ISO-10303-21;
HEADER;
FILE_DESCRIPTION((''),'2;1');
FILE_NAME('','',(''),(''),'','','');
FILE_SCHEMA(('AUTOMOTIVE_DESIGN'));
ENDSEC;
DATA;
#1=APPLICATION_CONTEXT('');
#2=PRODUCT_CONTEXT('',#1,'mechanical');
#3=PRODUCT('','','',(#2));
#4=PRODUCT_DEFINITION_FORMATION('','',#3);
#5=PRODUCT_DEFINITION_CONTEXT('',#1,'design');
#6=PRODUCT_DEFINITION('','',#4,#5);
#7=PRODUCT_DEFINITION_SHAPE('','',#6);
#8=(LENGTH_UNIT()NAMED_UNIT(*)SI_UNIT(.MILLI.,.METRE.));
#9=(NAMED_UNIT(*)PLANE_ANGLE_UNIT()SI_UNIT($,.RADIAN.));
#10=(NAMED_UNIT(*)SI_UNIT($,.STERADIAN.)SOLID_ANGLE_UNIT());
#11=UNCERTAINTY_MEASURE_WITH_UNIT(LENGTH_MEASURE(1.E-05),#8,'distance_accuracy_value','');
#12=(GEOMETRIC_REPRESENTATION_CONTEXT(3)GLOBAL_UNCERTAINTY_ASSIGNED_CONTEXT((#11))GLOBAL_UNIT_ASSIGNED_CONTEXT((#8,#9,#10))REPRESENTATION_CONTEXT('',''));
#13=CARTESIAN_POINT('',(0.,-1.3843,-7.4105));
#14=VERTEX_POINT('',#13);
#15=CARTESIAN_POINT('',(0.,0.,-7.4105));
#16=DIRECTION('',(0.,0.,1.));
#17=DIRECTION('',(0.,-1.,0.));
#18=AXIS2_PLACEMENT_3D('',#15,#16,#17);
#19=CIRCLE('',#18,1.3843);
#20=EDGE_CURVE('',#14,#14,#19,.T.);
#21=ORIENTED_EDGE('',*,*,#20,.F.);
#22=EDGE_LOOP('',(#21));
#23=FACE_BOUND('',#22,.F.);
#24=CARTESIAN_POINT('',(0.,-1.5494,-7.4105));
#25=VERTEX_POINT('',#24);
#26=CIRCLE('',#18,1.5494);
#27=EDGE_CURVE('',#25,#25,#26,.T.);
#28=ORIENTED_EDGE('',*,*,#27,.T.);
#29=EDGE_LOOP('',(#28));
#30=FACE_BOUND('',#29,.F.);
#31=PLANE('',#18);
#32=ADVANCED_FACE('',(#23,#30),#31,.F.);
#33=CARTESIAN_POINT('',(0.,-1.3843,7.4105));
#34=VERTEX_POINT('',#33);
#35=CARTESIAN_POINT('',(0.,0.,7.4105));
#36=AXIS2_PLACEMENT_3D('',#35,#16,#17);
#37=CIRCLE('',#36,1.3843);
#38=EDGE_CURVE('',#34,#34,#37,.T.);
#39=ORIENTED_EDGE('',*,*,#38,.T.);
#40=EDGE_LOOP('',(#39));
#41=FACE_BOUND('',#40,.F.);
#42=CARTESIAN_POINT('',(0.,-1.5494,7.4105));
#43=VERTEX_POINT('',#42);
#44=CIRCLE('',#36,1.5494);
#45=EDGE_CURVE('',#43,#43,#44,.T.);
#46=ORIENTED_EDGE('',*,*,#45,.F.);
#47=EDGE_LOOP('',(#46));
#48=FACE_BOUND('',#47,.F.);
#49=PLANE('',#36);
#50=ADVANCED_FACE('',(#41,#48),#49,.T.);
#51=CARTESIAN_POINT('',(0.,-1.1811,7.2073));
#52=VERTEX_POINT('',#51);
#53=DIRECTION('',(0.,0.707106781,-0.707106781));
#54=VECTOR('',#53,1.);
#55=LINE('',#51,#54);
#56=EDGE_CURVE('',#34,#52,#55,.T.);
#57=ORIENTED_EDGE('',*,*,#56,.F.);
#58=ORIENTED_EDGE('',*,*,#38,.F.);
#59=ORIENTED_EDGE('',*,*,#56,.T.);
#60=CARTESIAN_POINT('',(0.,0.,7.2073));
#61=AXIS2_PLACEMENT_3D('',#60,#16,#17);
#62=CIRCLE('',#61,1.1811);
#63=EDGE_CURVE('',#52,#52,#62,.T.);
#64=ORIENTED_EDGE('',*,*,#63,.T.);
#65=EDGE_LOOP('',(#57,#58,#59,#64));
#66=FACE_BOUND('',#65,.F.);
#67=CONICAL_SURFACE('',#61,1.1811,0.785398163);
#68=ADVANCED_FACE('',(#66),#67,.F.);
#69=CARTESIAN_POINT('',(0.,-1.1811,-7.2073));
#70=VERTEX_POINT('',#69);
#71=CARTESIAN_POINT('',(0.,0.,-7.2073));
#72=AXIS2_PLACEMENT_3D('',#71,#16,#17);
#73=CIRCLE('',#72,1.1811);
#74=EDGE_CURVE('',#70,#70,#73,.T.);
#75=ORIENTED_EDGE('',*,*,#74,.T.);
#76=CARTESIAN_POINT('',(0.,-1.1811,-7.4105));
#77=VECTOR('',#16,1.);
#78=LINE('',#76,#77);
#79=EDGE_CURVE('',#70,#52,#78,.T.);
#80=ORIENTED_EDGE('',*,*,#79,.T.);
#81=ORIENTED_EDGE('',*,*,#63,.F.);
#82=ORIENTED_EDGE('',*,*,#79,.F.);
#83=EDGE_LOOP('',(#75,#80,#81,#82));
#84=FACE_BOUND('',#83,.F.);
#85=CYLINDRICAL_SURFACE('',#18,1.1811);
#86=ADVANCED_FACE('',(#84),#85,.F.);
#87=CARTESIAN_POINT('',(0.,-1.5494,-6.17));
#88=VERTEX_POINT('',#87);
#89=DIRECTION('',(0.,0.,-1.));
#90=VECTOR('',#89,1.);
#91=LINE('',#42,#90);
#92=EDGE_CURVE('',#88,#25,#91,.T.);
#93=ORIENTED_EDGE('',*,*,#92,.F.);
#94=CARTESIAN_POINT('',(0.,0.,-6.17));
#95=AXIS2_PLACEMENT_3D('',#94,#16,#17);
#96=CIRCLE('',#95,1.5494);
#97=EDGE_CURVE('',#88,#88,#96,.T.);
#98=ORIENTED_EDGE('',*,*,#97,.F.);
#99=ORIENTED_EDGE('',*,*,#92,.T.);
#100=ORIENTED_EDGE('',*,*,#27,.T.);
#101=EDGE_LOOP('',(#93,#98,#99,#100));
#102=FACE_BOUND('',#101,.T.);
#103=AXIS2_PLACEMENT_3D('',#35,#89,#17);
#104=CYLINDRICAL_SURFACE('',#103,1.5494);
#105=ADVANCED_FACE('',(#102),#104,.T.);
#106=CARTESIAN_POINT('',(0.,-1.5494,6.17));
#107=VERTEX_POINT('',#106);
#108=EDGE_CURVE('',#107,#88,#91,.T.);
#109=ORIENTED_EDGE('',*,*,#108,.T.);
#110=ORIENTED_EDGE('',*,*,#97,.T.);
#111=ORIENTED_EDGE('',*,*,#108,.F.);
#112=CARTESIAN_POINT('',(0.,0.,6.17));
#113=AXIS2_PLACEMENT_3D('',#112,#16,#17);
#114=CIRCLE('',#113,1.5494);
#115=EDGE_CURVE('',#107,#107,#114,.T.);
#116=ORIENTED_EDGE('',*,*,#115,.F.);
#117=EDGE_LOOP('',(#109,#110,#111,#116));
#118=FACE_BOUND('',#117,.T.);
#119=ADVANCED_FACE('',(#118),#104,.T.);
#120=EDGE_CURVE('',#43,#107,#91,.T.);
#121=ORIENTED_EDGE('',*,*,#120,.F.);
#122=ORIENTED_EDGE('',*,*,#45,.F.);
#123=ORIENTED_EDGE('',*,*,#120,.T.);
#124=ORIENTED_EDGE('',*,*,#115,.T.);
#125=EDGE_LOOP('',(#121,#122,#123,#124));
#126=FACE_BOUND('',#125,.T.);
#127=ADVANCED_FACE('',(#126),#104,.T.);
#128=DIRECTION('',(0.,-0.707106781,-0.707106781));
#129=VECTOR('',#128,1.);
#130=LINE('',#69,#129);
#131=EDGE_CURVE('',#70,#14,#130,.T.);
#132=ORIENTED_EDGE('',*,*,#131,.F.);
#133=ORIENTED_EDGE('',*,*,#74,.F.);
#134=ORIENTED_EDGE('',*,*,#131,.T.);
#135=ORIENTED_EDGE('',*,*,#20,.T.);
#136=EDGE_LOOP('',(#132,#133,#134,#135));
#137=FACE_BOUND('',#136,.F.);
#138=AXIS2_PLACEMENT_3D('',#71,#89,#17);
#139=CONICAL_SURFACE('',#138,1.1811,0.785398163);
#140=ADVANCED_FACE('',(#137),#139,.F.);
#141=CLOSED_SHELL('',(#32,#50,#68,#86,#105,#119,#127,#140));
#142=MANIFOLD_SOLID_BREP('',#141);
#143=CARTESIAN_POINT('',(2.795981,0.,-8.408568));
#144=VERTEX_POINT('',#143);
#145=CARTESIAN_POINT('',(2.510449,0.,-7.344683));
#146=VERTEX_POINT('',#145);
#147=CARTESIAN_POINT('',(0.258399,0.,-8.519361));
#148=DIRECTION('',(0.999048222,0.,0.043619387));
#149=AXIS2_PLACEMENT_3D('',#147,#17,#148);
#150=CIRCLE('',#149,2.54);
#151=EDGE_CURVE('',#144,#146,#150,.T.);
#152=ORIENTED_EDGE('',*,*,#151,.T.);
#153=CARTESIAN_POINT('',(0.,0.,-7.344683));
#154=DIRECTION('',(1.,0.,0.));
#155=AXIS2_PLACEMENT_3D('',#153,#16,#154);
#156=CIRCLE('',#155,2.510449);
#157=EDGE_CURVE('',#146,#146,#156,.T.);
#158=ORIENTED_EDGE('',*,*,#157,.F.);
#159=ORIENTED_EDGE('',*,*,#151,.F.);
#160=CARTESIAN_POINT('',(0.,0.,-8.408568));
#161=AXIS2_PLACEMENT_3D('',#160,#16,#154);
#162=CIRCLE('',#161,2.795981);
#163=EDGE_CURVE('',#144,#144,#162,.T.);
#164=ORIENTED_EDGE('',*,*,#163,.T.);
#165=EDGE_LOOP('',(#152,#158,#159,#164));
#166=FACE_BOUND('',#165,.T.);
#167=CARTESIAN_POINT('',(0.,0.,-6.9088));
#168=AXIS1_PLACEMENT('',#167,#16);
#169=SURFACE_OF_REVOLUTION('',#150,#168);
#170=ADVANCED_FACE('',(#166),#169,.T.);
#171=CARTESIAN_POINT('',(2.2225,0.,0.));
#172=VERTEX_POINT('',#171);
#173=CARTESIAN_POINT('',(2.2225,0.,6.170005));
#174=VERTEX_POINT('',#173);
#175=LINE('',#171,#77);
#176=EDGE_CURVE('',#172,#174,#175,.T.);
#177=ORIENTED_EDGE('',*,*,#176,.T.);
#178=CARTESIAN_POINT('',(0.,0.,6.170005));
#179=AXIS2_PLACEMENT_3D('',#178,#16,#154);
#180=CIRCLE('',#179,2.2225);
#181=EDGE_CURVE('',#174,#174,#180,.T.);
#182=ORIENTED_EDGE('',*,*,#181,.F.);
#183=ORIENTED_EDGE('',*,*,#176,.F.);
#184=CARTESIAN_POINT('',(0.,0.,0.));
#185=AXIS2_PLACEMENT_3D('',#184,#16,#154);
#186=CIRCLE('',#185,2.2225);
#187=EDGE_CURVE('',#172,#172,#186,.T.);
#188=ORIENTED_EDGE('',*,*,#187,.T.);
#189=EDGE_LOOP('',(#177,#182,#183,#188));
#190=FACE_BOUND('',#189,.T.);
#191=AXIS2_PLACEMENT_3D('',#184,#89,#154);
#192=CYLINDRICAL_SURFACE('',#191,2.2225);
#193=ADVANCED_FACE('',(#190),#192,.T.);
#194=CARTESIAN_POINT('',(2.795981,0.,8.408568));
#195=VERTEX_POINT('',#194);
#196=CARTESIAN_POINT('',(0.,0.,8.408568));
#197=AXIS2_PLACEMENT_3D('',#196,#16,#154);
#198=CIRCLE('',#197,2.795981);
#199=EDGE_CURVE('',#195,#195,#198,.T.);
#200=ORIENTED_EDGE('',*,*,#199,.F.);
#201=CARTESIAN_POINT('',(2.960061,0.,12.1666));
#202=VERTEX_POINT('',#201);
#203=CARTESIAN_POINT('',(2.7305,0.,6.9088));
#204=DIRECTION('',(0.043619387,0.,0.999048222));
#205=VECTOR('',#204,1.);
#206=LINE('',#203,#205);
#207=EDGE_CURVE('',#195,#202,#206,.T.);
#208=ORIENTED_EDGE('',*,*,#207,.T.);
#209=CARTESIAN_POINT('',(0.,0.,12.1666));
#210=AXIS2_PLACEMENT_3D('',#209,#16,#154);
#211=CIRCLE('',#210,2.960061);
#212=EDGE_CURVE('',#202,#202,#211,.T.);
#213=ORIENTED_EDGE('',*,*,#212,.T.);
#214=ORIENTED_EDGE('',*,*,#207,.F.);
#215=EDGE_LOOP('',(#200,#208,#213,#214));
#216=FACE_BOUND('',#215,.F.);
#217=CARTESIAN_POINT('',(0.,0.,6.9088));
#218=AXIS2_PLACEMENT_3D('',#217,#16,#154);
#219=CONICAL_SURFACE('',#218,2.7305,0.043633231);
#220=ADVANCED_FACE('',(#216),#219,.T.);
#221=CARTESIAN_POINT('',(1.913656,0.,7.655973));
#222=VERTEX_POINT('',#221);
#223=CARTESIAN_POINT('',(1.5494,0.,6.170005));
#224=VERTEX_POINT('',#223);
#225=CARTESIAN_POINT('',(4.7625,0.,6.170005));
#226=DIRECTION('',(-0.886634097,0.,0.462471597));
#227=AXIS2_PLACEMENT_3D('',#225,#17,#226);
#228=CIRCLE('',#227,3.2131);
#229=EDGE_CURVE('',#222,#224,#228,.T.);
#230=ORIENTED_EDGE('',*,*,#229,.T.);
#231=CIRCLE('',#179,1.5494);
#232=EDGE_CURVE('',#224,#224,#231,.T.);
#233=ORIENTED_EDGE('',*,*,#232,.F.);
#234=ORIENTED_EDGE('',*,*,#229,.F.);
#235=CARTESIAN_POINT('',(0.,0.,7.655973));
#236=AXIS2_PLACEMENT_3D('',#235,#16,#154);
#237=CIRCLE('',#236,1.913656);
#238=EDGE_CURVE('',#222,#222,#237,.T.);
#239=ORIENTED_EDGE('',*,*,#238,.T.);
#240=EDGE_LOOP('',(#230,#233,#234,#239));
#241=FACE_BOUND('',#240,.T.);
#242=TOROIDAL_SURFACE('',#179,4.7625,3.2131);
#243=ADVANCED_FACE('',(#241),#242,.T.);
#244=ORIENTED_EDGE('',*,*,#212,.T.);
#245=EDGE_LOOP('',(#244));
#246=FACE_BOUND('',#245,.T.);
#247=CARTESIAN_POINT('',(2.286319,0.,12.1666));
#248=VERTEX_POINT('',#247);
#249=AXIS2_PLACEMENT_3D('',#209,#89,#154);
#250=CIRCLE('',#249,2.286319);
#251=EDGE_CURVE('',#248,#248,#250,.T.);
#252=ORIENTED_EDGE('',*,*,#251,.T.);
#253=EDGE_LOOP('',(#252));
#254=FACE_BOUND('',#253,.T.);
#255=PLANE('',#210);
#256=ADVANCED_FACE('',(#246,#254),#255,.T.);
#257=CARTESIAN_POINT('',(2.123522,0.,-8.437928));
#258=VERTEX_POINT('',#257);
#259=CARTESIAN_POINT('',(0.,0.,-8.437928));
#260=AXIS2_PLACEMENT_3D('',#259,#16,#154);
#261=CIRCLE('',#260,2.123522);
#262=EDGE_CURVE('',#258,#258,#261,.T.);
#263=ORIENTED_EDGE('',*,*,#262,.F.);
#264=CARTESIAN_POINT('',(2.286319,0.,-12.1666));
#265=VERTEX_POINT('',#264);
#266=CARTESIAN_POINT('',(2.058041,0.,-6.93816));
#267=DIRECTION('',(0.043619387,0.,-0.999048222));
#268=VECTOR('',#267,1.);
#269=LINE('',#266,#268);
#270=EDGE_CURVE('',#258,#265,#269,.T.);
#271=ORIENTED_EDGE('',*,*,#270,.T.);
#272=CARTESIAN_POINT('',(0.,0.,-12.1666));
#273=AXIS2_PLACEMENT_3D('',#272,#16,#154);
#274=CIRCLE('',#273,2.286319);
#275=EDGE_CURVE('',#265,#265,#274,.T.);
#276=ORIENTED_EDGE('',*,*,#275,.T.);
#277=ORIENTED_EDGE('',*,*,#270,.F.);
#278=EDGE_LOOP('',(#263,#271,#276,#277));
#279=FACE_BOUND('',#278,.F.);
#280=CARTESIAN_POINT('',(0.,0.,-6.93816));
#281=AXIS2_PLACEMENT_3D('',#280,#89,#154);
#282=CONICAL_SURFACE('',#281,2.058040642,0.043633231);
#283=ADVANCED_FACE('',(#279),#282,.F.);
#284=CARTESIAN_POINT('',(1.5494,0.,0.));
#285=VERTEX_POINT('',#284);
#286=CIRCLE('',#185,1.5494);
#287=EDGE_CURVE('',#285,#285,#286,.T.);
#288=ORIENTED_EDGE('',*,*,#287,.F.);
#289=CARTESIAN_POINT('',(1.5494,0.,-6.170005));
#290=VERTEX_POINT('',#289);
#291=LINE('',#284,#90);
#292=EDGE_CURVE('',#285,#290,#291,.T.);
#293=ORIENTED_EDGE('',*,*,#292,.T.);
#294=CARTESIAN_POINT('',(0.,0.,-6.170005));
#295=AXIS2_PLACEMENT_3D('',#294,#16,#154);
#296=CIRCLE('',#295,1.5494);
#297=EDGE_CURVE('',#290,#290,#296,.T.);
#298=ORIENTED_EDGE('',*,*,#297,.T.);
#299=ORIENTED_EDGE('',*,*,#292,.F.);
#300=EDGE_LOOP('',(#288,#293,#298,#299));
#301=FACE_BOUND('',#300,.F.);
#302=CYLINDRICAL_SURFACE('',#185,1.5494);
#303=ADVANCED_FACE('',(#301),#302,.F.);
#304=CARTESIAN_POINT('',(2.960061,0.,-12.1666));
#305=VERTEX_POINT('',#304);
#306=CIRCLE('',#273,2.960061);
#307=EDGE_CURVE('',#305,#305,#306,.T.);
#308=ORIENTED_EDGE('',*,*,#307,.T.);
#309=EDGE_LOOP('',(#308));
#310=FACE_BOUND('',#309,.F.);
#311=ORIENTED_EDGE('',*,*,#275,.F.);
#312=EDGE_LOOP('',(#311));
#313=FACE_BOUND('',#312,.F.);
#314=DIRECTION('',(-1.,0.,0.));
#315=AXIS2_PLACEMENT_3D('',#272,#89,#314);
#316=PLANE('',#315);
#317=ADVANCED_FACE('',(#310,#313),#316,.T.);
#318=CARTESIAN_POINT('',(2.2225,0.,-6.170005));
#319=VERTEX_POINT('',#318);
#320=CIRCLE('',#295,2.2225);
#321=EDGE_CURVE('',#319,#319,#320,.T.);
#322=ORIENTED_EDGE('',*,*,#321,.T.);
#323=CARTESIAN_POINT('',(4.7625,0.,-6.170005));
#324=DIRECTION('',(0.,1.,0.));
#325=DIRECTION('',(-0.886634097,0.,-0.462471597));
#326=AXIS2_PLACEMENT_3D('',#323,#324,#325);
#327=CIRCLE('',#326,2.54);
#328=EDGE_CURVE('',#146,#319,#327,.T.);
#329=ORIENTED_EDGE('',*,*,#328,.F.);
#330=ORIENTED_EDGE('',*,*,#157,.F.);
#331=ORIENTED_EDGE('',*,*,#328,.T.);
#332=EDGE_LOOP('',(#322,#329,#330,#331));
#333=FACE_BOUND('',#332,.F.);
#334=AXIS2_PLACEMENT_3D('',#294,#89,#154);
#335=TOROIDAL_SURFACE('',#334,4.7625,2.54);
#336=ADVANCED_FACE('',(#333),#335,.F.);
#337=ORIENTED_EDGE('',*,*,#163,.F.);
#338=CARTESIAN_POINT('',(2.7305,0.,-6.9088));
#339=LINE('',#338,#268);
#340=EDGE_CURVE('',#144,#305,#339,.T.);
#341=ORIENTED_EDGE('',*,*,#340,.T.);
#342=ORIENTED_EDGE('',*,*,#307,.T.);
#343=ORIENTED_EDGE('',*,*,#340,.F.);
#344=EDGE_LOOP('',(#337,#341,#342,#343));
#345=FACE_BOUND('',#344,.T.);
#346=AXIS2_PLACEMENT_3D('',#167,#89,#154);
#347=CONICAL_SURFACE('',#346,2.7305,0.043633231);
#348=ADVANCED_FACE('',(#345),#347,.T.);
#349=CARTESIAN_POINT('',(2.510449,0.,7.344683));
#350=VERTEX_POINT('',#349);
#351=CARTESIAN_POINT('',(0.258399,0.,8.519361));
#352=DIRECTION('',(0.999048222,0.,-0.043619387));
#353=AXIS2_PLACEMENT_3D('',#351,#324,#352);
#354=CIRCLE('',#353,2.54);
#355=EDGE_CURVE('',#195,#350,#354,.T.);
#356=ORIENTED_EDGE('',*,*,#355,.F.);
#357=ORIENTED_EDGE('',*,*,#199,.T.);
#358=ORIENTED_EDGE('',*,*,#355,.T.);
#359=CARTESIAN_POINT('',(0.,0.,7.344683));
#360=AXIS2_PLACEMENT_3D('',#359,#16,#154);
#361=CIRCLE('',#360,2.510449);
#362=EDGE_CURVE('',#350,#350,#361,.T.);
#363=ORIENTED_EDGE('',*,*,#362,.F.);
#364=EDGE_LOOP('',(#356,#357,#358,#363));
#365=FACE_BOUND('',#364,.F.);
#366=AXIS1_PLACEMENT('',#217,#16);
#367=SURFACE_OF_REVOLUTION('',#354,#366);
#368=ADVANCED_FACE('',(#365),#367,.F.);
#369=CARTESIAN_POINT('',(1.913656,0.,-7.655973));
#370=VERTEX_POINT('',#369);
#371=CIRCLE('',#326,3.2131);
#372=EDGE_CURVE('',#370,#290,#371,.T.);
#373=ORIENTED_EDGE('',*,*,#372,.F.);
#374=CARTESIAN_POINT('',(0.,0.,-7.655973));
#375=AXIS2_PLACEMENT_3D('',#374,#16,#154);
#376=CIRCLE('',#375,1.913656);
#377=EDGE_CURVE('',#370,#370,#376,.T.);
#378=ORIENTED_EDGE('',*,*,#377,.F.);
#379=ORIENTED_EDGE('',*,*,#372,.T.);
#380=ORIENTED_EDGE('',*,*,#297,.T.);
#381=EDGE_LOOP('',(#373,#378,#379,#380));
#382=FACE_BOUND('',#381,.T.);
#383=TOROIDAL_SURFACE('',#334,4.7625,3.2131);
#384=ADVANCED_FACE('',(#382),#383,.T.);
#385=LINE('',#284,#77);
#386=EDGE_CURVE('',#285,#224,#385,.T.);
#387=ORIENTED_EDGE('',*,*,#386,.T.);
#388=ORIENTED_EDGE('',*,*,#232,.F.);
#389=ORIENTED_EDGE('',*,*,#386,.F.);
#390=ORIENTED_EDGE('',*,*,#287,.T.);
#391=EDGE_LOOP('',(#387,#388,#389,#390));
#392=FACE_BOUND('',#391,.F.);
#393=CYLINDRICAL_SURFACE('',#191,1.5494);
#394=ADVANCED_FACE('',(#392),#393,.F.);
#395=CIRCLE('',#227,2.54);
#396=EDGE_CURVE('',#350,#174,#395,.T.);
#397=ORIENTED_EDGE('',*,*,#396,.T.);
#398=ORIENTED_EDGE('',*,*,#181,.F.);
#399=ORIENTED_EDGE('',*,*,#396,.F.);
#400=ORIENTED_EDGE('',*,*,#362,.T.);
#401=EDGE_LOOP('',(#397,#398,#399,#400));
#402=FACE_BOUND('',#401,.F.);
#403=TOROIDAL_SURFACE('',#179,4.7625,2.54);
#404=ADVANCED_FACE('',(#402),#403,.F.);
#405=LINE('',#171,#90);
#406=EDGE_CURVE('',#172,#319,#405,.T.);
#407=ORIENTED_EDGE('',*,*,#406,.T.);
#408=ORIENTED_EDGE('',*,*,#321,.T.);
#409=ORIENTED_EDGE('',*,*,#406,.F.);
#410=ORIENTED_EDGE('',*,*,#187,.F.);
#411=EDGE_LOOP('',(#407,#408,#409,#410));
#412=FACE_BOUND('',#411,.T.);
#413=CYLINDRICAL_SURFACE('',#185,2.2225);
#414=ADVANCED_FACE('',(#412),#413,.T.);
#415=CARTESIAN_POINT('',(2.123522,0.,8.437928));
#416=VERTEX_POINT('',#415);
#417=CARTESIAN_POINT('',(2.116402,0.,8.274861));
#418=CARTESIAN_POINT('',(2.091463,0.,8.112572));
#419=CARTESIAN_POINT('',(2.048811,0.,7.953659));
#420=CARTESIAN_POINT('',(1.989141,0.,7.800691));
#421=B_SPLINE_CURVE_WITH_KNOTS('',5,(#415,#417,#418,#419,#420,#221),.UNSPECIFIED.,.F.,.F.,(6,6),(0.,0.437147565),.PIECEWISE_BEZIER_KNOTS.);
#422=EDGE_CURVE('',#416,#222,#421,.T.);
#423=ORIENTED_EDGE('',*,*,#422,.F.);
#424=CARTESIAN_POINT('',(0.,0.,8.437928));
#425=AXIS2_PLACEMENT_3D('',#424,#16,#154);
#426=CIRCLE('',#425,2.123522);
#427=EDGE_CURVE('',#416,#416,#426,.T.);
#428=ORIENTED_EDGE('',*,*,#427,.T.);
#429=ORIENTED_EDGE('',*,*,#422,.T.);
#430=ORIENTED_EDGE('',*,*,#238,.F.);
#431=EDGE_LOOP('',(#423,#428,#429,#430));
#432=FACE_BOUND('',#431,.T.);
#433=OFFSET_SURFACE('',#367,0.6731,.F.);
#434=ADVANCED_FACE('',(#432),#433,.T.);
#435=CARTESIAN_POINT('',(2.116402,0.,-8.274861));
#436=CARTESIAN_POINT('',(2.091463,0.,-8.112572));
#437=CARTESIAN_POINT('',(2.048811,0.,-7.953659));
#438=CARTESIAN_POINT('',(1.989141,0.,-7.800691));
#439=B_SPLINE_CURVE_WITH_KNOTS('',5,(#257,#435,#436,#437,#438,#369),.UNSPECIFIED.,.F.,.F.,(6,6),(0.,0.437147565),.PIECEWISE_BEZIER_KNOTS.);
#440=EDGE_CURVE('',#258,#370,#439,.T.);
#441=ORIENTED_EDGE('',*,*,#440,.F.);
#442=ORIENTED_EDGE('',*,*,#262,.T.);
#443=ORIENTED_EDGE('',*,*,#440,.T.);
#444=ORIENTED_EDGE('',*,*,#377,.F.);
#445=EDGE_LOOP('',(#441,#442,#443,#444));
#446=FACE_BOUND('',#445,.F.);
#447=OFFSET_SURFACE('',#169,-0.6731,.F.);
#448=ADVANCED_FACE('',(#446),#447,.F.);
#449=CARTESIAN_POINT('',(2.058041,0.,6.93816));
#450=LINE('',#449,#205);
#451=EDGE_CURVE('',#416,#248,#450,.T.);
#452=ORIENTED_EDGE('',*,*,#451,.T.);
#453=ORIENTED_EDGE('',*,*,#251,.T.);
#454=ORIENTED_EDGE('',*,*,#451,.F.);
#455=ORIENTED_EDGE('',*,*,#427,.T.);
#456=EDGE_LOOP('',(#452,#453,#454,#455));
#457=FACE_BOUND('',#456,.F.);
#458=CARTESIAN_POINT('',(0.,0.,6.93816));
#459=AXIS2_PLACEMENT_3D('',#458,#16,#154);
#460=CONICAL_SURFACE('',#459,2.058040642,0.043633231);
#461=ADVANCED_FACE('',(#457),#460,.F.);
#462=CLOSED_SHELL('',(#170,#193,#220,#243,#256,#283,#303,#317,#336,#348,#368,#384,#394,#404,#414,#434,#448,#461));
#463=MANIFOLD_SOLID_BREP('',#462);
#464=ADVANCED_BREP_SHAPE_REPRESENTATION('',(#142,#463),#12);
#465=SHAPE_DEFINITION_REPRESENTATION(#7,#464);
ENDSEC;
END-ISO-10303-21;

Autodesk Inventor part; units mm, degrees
ref_plane "YZ Plane" through (0, 0, 0) normal (1, 0, 0) x (0, 1, 0)
ref_plane "XZ Plane" through (0, 0, 0) normal (0, 1, 0) x (-1, 0, 0)
ref_plane "XY Plane" through (0, 0, 0) normal (0, 0, 1) x (1, 0, 0)
sketch "Sketch1" plane through (0, 0, 0) normal (0, 0, 1) x (1, 0, 0)
  circle A0 centre (0, 0) radius 2.2225
  dimension "d0" = 4.445
extrude "Extrusion1" add sketch "Sketch1" along normal mid plane 13.8176
sketch "Sketch4" plane through (0, 0, 6.9088) normal (0, 0, 1) x (1, 0, 0)
  circle A0 centre (0, 0) radius 2.7305
  dimension "d16" = 5.461
extrude "Extrusion3" add sketch "Sketch4" along normal blind 5.2578 draft 2.5
fillet "Fillet3" radius 2.54 2 edges at (-2.7305, 0, 6.9088) (-2.2225, 0, 6.9088)
mirror "Mirror2" about plane through (0, 0, 0) normal (0, 0, 1) of "Extrusion3", "Fillet3"
shell "Shell1" thickness 0.6731 removed faces 2 at (-0.7385, 0.6543, 12.1666) at (-0.7385, 0.6543, -12.1666)
sketch "Sketch3" plane through (0, 0, 0) normal (1, 0, 0) x (0, 1, 0)
  line L0 (-1.5494, -7.4105) -> (-1.1811, -7.4105)
  line L1 (-1.1811, -7.4105) -> (-1.1811, 7.4105)
  line L2 (-1.1811, 7.4105) -> (-1.5494, 7.4105)
  line L3 (-1.5494, 7.4105) -> (-1.5494, -7.4105)
  line L4 (0, -17.3088) -> (0, 17.3088) projected
  arc A0 (-2.5104, -7.3447) -> (-2.2225, -6.17) centre (-4.7625, -6.17) ccw projected
  line L5 (-2.2225, -6.17) -> (-2.2225, 6.17) projected
  arc A1 (-2.2225, 6.17) -> (-2.5104, 7.3447) centre (-4.7625, 6.17) ccw projected
  arc A2 (-2.796, 8.4086) -> (-2.5104, 7.3447) centre (-0.2584, 8.5194) ccw projected
  line L6 (-2.796, 8.4086) -> (-2.9601, 12.1666) projected
  line L7 (-2.9601, 12.1666) -> (-2.2863, 12.1666) projected
  line L8 (-2.2863, 12.1666) -> (-2.1235, 8.4379) projected
  arc A3 (-2.1235, 8.4379) -> (-1.9137, 7.656) centre (-0.2584, 8.5194) ccw projected
  arc A4 (-1.5494, 6.17) -> (-1.9137, 7.656) centre (-4.7625, 6.17) ccw projected
  line L9 (-1.5494, 6.17) -> (-1.5494, -6.17) projected
  arc A5 (-1.9137, -7.656) -> (-1.5494, -6.17) centre (-4.7625, -6.17) ccw projected
  arc A6 (-1.9137, -7.656) -> (-2.1235, -8.4379) centre (-0.2584, -8.5194) ccw projected
  line L10 (-2.1235, -8.4379) -> (-2.2863, -12.1666) projected
  line L11 (-2.2863, -12.1666) -> (-2.9601, -12.1666) projected
  line L12 (-2.9601, -12.1666) -> (-2.796, -8.4086) projected
  arc A7 (-2.5104, -7.3447) -> (-2.796, -8.4086) centre (-0.2584, -8.5194) ccw projected
  arc A8 (2.2225, -6.17) -> (2.5104, -7.3447) centre (4.7625, -6.17) ccw projected
  arc A9 (2.796, -8.4086) -> (2.5104, -7.3447) centre (0.2584, -8.5194) ccw projected
  line L13 (2.796, -8.4086) -> (2.9601, -12.1666) projected
  line L14 (2.9601, -12.1666) -> (2.2863, -12.1666) projected
  line L15 (2.2863, -12.1666) -> (2.1235, -8.4379) projected
  arc A10 (2.1235, -8.4379) -> (1.9137, -7.656) centre (0.2584, -8.5194) ccw projected
  arc A11 (1.5494, -6.17) -> (1.9137, -7.656) centre (4.7625, -6.17) ccw projected
  line L16 (1.5494, -6.17) -> (1.5494, 6.17) projected
  arc A12 (1.9137, 7.656) -> (1.5494, 6.17) centre (4.7625, 6.17) ccw projected
  arc A13 (1.9137, 7.656) -> (2.1235, 8.4379) centre (0.2584, 8.5194) ccw projected
  line L17 (2.1235, 8.4379) -> (2.2863, 12.1666) projected
  line L18 (2.2863, 12.1666) -> (2.9601, 12.1666) projected
  line L19 (2.9601, 12.1666) -> (2.796, 8.4086) projected
  arc A14 (2.5104, 7.3447) -> (2.796, 8.4086) centre (0.2584, 8.5194) ccw projected
  arc A15 (2.5104, 7.3447) -> (2.2225, 6.17) centre (4.7625, 6.17) ccw projected
  line L20 (2.2225, 6.17) -> (2.2225, -6.17) projected
  point P0 (0, 0)
  point P1 (-1.5494, 6.6485)
  point P2 (-1.5494, -6.6485)
  dimension "d9" = 0.3683
revolve "Revolution1" add sketch "Sketch3" angle 360 about axis through (0, 0, -10) along (0, 0, 1) separate body contours L3 L2 L1 L0
chamfer "Chamfer1" distance 0.2032 angle 45 2 edges at (0, 1.1811, 7.4105) (0, 1.1811, -7.4105)
properties part number "22-18 double sided female tube heat shrink red"
